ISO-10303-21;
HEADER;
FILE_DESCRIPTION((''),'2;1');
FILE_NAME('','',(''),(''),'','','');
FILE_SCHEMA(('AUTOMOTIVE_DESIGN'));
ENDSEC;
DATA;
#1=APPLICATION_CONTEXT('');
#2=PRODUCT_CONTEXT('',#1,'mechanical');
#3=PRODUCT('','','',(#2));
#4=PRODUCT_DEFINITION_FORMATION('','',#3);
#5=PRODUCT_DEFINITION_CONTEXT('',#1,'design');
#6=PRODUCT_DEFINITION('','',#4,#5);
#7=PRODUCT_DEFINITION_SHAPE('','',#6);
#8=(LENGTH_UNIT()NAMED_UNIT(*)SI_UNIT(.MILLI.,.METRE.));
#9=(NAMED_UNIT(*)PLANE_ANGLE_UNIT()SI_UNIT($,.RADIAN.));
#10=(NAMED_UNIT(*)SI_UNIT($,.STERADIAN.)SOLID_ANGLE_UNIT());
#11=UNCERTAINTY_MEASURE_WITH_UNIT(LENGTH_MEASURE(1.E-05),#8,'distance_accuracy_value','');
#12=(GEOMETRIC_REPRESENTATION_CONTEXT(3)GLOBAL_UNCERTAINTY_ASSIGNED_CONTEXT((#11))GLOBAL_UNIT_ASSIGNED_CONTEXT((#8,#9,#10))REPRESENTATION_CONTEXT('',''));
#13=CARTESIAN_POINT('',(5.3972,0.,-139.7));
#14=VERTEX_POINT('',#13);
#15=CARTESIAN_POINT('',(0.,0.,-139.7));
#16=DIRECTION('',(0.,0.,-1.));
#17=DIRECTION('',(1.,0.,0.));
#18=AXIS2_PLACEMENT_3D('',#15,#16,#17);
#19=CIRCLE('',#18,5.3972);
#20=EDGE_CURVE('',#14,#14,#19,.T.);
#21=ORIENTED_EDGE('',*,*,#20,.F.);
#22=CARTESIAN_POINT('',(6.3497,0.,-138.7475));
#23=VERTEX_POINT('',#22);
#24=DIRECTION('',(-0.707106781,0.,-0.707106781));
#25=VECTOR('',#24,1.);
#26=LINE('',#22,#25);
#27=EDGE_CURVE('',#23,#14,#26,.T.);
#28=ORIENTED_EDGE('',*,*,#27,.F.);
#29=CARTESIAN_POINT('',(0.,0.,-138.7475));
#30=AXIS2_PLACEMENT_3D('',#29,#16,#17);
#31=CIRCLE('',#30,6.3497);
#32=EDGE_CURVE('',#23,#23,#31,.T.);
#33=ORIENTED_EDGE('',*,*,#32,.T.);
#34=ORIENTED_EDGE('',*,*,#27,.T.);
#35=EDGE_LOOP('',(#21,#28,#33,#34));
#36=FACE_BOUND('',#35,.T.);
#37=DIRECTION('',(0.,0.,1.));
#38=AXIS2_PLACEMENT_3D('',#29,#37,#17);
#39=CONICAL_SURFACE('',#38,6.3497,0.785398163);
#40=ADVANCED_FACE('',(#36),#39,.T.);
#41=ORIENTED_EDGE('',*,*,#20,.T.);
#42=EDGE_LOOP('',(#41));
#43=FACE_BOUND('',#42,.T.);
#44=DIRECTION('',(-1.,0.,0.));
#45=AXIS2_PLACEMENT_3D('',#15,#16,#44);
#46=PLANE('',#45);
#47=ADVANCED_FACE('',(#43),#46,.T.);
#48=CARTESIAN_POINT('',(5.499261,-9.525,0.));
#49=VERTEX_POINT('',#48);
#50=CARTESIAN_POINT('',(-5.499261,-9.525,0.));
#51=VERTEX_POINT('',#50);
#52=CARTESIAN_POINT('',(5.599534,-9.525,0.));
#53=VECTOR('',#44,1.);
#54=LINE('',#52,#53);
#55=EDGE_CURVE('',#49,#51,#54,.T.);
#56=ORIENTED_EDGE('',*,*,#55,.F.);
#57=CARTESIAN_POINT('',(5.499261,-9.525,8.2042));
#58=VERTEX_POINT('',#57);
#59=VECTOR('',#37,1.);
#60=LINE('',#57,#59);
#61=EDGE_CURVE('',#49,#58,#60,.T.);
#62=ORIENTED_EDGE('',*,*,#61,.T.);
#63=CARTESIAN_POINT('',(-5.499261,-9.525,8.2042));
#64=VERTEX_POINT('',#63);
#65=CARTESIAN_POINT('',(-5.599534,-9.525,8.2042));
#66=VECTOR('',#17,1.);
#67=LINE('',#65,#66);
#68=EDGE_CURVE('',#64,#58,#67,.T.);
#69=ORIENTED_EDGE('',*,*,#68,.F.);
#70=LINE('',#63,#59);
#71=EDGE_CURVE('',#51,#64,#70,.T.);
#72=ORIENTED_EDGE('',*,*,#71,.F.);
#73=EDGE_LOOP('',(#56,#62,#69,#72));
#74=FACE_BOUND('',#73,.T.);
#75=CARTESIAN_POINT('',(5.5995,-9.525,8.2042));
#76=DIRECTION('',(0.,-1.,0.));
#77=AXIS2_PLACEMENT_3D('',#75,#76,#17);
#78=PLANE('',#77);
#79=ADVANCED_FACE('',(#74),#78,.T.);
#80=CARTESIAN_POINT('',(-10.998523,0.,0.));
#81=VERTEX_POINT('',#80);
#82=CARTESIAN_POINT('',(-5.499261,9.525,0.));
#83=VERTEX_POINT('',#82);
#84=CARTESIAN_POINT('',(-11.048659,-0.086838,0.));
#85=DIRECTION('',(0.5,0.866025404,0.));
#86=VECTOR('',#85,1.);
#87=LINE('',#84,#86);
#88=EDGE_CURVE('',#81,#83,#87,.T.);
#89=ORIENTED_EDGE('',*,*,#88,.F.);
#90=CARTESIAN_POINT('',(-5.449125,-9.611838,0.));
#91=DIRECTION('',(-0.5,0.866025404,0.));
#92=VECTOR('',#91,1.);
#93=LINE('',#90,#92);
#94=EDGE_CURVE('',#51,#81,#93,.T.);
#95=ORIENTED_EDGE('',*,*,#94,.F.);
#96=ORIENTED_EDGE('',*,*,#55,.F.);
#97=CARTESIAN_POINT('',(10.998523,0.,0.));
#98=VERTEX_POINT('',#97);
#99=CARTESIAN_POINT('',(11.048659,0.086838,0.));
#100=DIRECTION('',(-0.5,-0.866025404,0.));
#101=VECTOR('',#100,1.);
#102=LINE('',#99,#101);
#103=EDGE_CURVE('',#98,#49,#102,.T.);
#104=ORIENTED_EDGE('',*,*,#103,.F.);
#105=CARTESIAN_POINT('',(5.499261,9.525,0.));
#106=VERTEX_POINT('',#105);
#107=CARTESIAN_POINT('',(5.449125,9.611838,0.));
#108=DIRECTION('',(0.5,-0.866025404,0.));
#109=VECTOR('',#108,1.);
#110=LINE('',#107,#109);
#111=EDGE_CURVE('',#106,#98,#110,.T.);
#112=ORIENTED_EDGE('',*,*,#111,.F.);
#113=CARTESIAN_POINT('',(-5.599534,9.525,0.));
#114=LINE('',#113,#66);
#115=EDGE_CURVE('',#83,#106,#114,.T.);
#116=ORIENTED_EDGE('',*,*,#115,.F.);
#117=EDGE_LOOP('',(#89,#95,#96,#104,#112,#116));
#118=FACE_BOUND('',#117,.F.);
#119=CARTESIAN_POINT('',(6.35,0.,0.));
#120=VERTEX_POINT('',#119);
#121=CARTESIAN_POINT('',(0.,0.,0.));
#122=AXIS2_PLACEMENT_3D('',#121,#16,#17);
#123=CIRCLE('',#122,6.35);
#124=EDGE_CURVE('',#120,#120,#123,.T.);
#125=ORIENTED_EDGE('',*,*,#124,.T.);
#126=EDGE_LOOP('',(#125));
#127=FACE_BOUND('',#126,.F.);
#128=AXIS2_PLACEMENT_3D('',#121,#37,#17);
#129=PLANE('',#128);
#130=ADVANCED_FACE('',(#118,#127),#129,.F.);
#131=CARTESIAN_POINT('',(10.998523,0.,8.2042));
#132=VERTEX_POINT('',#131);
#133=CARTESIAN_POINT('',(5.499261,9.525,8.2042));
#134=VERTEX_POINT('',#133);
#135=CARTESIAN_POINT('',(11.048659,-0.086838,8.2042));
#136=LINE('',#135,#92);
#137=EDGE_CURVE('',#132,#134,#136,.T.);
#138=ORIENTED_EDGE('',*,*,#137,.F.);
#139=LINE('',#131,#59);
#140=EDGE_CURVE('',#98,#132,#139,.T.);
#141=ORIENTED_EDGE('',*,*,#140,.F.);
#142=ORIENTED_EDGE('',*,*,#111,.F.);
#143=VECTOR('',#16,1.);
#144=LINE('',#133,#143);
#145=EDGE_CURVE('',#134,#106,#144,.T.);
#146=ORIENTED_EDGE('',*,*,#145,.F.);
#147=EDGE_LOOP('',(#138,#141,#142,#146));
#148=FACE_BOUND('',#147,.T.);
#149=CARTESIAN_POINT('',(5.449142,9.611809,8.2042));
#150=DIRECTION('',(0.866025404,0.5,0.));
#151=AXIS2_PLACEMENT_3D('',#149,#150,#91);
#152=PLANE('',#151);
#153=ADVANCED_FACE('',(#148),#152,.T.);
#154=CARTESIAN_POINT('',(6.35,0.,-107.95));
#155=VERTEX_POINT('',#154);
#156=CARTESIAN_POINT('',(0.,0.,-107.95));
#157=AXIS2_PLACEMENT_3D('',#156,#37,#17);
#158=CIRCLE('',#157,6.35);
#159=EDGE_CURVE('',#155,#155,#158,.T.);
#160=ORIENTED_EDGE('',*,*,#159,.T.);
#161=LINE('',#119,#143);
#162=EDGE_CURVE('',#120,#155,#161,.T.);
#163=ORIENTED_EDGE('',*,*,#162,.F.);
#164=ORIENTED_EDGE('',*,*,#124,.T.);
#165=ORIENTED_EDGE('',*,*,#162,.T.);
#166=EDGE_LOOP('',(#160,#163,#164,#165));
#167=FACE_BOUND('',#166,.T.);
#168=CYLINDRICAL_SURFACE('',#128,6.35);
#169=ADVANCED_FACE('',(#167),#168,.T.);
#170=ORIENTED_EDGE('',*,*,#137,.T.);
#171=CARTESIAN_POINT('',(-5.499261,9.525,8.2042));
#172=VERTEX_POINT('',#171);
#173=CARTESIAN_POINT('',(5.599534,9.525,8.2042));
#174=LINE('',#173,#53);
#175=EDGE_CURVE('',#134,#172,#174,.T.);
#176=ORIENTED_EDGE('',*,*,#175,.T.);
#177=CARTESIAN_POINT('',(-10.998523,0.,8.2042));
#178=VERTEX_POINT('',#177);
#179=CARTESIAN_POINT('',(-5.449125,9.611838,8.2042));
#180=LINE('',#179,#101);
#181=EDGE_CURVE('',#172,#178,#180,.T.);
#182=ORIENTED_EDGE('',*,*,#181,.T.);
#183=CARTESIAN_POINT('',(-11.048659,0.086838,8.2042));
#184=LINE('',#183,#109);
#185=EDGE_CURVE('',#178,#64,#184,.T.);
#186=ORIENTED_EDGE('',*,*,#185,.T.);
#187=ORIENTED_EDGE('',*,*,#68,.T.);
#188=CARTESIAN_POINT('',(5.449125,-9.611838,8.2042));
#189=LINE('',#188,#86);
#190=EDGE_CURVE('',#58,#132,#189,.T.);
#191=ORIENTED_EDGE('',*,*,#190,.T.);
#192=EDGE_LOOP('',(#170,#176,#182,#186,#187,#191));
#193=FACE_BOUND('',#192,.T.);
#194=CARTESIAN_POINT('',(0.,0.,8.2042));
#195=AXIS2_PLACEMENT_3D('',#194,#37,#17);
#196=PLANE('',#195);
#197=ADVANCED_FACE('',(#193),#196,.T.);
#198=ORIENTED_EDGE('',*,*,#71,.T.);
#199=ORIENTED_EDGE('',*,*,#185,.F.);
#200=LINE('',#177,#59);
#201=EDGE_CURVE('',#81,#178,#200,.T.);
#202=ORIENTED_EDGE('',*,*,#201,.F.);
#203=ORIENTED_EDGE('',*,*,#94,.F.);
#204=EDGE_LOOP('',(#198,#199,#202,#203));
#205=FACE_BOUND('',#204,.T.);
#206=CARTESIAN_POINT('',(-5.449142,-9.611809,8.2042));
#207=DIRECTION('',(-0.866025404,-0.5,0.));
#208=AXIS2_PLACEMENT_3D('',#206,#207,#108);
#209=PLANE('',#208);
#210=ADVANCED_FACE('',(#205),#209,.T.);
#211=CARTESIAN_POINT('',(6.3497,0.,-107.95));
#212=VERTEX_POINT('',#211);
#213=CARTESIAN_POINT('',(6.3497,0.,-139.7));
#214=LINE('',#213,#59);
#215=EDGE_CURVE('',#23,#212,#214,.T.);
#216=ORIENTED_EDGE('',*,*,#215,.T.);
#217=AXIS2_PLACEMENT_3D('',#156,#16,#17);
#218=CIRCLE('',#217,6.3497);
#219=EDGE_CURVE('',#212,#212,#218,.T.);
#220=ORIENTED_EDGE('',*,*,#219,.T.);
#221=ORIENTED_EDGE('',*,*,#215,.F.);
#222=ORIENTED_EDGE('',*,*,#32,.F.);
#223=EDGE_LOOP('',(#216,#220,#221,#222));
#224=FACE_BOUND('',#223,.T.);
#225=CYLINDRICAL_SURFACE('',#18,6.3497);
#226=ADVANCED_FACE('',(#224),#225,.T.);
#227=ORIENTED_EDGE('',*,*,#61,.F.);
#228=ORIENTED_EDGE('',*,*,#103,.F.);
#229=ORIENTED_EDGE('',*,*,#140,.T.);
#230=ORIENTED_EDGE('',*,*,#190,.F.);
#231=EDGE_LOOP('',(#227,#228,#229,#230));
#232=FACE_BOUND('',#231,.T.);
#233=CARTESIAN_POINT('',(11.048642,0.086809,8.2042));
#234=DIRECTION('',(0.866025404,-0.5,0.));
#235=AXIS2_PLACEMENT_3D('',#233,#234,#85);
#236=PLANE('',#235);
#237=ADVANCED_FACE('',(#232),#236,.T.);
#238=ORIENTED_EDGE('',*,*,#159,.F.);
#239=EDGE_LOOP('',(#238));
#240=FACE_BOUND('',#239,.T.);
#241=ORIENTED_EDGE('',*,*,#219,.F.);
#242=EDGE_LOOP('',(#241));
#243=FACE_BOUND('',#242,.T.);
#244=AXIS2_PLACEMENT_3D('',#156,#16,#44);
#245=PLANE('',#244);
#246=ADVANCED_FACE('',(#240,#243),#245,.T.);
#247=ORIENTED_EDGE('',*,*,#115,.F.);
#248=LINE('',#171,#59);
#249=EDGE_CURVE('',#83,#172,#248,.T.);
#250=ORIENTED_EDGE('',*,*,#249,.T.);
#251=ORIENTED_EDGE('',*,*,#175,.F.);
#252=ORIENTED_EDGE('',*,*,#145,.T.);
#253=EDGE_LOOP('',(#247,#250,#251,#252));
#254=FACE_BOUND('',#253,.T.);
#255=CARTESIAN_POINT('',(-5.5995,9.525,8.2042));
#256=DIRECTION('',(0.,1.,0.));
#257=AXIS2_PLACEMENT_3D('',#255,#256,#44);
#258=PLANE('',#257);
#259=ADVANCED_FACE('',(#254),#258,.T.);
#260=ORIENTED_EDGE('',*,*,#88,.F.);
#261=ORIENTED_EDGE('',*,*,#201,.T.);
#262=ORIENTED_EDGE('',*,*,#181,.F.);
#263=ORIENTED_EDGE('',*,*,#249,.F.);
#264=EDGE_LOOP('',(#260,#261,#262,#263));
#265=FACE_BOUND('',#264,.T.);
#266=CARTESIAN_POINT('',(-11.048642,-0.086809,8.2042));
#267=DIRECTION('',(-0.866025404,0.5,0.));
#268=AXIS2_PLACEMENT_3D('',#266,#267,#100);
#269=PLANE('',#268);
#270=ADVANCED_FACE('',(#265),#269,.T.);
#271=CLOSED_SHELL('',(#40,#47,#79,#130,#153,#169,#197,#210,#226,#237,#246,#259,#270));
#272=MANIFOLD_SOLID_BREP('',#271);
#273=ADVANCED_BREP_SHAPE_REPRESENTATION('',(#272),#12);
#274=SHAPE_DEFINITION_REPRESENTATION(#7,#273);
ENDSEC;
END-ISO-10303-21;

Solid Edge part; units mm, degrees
sketch "Sketch1" plane through (0, 0, 0) normal (0, 0, 1) x (1, 0, 0)
  circle A0 centre (0, 0) radius 11.049
  dimension "D1" = 22.098
extrude "Protrusion1" add sketch "Sketch1" along normal blind 8.2042
sketch "Sketch2" plane through (0, 0, 0) normal (0, 0, -1) x (1, 0, 0)
  circle A0 centre (0, 0) radius 6.35
extrude "Protrusion2" add sketch "Sketch2" along normal blind 139.7
sketch "Sketch3" plane through (0, 0, -139.7) normal (0, 0, -1) x (1, 0, 0)
  circle A0 centre (0, 0) radius 6.3497
extrude "Cutout1" cut sketch "Sketch3" against normal blind 31.75 flip side to cut
chamfer "Chamfer_1" distance 0.9525 angle 45 1 edges at (-6.3497, 0, -139.7)
sketch "Sketch4" plane through (0, 0, 8.2042) normal (0, 0, 1) x (1, 0, 0)
  line L0 (-5.5995, 9.525) -> (5.5995, 9.525)
  dimension "D1" = 19.05
extrude "Cutout2" cut sketch "Sketch4" against normal up to next material side at (0, 9.575, 8.2042)
pattern_circular "Pattern1" count 6 over 360 about axis through (0, 0, 8.2042) along (0, 0, 1) of "Cutout2"
properties part number "24102126"
